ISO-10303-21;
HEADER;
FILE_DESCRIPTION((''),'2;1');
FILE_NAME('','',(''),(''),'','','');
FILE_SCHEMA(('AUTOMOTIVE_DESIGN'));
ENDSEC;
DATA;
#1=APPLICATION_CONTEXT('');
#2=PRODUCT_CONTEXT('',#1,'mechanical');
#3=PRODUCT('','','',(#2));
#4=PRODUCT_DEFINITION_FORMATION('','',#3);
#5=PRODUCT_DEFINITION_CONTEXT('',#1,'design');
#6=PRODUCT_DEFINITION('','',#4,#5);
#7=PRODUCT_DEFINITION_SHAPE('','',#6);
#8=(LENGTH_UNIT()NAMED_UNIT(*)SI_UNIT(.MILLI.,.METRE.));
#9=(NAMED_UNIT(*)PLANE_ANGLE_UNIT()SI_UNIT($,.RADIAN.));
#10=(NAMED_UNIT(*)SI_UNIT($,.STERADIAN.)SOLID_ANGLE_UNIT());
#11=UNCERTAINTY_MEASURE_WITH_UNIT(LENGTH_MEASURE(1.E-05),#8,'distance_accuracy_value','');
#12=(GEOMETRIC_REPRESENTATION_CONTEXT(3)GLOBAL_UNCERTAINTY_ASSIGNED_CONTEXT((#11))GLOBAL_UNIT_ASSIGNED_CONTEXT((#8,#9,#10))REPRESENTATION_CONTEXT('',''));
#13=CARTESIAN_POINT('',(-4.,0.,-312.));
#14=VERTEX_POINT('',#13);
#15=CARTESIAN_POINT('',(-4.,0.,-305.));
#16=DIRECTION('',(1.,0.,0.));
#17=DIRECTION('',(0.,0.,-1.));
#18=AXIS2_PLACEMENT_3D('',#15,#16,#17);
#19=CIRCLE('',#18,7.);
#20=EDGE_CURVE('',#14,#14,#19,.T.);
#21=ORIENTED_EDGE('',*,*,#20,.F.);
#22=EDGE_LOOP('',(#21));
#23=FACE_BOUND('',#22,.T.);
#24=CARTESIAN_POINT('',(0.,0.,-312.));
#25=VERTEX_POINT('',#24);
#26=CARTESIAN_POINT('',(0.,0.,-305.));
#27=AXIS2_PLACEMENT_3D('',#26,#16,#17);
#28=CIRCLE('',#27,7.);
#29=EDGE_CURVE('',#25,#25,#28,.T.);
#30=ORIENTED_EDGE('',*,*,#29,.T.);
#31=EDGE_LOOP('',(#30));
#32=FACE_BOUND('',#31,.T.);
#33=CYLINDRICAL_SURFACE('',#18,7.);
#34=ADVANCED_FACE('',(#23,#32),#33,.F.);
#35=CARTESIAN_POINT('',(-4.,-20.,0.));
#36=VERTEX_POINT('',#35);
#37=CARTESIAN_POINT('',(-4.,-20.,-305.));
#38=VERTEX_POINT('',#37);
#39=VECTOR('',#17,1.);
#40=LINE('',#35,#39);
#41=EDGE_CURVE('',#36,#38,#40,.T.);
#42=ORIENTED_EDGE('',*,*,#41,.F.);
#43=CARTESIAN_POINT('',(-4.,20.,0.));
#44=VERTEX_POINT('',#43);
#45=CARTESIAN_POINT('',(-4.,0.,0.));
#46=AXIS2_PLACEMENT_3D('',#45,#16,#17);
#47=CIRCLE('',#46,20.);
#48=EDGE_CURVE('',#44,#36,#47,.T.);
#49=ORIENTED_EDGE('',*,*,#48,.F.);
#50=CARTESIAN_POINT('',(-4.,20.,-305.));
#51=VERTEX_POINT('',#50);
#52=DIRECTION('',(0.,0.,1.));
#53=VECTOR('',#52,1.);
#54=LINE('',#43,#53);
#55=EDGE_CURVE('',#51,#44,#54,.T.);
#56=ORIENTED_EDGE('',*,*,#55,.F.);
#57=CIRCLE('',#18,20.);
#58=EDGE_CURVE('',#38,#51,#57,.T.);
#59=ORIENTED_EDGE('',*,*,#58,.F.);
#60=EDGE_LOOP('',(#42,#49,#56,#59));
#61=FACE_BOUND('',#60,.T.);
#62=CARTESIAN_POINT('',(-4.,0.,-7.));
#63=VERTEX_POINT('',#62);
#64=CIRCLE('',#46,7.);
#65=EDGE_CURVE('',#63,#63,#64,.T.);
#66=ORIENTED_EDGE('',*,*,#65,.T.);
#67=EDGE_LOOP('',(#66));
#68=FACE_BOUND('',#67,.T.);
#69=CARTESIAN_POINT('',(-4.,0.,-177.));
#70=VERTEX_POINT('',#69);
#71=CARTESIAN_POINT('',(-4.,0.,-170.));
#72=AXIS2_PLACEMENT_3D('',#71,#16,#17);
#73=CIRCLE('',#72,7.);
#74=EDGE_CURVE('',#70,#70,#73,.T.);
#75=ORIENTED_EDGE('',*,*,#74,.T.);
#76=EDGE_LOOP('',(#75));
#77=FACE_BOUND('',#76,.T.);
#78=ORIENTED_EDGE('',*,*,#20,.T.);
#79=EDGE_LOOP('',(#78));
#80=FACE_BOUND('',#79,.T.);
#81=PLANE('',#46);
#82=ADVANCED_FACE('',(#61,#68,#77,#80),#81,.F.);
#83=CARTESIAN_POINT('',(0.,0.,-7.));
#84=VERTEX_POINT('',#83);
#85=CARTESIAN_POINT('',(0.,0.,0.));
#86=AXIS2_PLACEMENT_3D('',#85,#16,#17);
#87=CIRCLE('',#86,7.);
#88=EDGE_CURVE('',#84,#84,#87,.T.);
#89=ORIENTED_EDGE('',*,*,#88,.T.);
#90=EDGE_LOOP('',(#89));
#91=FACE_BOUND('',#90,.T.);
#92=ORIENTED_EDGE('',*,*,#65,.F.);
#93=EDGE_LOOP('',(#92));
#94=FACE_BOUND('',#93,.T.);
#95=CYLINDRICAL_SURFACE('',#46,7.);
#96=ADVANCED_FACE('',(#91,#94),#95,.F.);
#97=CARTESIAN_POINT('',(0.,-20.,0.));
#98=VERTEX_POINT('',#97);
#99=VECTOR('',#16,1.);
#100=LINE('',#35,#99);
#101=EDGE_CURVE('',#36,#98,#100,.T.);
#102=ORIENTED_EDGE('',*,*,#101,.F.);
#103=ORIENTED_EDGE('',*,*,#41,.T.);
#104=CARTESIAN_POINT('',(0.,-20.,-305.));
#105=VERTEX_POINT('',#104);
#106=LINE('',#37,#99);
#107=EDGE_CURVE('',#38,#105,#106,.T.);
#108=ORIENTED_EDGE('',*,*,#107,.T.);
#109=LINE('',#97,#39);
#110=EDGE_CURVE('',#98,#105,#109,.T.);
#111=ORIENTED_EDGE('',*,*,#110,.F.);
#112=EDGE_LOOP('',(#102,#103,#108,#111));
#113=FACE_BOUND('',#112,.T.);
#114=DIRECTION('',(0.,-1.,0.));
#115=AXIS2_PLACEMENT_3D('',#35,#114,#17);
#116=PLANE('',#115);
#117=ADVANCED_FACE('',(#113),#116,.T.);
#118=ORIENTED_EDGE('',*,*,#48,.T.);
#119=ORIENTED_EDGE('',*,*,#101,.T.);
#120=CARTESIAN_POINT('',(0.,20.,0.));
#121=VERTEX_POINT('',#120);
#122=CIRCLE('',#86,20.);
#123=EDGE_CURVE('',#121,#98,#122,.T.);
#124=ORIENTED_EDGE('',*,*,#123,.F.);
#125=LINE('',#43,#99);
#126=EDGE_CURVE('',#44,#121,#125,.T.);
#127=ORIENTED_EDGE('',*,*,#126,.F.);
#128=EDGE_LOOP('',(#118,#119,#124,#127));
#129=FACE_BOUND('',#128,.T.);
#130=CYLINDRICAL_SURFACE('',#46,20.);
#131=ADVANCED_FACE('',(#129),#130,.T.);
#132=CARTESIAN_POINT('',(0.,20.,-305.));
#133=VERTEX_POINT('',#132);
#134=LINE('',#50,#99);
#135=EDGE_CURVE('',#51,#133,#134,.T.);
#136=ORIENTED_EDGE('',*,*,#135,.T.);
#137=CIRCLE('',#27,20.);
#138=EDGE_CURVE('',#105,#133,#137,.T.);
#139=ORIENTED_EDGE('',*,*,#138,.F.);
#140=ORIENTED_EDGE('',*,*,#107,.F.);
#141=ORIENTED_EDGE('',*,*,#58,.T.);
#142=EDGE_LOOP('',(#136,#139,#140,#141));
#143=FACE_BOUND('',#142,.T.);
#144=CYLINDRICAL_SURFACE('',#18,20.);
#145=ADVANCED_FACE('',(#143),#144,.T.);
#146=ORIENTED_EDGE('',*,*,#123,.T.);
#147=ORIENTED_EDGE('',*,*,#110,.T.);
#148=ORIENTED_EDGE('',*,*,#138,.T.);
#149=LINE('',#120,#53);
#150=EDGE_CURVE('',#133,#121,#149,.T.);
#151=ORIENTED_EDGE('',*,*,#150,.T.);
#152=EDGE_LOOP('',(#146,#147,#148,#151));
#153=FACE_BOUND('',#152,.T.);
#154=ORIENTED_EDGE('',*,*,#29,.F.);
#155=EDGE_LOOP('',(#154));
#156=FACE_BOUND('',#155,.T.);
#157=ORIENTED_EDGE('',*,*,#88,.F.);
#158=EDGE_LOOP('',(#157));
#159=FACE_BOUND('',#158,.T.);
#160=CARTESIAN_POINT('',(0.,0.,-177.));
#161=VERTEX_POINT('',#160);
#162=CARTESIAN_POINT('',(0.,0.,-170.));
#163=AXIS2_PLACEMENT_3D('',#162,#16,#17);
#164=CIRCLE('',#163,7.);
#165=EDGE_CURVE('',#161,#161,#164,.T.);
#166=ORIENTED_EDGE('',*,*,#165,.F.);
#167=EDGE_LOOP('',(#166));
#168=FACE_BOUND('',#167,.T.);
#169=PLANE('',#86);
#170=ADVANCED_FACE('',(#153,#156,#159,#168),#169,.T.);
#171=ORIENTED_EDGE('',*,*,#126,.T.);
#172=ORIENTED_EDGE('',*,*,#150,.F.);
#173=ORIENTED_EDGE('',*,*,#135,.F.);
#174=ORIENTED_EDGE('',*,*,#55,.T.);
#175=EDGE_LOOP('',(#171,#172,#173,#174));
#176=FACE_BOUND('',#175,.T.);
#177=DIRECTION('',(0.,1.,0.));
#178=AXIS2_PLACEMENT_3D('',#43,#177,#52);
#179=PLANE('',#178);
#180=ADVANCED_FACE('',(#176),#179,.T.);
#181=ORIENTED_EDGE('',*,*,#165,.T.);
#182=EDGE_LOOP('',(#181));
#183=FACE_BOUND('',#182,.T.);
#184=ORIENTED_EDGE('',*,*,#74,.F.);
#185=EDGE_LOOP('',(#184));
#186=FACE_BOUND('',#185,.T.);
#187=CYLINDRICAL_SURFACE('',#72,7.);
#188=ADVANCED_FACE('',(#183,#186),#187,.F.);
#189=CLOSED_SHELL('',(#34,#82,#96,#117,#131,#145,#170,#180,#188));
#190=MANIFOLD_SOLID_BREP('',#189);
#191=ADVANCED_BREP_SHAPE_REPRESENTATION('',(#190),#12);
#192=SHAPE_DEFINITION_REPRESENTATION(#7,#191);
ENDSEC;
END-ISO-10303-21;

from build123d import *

# Parameters (mm, degrees)
SKETCH_1_R             = 7
SM_BASE_FLANGE_1_DEPTH = 4


# Sheet-metal steps are written as plain solids
with BuildPart() as part:
    # Sketch 1 → Базовая кромка1 (new body)
    with BuildSketch(Plane(origin=(0, 0, 0), x_dir=(0, 0, -1), z_dir=(1, 0, 0))):
        with BuildLine():
            Line((0, 20), (305, 20))
            ThreePointArc((305, 20), (325, 0), (305, -20))
            Line((305, -20), (0, -20))
            ThreePointArc((0, -20), (-20, 0), (0, 20))
        make_face()
        Circle(SKETCH_1_R, mode=Mode.SUBTRACT)
        with Locations((305, 0)):
            Circle(SKETCH_1_R, mode=Mode.SUBTRACT)
        with Locations((170, 0)):
            Circle(SKETCH_1_R, mode=Mode.SUBTRACT)
    extrude(amount=-SM_BASE_FLANGE_1_DEPTH)


solid = part.part
